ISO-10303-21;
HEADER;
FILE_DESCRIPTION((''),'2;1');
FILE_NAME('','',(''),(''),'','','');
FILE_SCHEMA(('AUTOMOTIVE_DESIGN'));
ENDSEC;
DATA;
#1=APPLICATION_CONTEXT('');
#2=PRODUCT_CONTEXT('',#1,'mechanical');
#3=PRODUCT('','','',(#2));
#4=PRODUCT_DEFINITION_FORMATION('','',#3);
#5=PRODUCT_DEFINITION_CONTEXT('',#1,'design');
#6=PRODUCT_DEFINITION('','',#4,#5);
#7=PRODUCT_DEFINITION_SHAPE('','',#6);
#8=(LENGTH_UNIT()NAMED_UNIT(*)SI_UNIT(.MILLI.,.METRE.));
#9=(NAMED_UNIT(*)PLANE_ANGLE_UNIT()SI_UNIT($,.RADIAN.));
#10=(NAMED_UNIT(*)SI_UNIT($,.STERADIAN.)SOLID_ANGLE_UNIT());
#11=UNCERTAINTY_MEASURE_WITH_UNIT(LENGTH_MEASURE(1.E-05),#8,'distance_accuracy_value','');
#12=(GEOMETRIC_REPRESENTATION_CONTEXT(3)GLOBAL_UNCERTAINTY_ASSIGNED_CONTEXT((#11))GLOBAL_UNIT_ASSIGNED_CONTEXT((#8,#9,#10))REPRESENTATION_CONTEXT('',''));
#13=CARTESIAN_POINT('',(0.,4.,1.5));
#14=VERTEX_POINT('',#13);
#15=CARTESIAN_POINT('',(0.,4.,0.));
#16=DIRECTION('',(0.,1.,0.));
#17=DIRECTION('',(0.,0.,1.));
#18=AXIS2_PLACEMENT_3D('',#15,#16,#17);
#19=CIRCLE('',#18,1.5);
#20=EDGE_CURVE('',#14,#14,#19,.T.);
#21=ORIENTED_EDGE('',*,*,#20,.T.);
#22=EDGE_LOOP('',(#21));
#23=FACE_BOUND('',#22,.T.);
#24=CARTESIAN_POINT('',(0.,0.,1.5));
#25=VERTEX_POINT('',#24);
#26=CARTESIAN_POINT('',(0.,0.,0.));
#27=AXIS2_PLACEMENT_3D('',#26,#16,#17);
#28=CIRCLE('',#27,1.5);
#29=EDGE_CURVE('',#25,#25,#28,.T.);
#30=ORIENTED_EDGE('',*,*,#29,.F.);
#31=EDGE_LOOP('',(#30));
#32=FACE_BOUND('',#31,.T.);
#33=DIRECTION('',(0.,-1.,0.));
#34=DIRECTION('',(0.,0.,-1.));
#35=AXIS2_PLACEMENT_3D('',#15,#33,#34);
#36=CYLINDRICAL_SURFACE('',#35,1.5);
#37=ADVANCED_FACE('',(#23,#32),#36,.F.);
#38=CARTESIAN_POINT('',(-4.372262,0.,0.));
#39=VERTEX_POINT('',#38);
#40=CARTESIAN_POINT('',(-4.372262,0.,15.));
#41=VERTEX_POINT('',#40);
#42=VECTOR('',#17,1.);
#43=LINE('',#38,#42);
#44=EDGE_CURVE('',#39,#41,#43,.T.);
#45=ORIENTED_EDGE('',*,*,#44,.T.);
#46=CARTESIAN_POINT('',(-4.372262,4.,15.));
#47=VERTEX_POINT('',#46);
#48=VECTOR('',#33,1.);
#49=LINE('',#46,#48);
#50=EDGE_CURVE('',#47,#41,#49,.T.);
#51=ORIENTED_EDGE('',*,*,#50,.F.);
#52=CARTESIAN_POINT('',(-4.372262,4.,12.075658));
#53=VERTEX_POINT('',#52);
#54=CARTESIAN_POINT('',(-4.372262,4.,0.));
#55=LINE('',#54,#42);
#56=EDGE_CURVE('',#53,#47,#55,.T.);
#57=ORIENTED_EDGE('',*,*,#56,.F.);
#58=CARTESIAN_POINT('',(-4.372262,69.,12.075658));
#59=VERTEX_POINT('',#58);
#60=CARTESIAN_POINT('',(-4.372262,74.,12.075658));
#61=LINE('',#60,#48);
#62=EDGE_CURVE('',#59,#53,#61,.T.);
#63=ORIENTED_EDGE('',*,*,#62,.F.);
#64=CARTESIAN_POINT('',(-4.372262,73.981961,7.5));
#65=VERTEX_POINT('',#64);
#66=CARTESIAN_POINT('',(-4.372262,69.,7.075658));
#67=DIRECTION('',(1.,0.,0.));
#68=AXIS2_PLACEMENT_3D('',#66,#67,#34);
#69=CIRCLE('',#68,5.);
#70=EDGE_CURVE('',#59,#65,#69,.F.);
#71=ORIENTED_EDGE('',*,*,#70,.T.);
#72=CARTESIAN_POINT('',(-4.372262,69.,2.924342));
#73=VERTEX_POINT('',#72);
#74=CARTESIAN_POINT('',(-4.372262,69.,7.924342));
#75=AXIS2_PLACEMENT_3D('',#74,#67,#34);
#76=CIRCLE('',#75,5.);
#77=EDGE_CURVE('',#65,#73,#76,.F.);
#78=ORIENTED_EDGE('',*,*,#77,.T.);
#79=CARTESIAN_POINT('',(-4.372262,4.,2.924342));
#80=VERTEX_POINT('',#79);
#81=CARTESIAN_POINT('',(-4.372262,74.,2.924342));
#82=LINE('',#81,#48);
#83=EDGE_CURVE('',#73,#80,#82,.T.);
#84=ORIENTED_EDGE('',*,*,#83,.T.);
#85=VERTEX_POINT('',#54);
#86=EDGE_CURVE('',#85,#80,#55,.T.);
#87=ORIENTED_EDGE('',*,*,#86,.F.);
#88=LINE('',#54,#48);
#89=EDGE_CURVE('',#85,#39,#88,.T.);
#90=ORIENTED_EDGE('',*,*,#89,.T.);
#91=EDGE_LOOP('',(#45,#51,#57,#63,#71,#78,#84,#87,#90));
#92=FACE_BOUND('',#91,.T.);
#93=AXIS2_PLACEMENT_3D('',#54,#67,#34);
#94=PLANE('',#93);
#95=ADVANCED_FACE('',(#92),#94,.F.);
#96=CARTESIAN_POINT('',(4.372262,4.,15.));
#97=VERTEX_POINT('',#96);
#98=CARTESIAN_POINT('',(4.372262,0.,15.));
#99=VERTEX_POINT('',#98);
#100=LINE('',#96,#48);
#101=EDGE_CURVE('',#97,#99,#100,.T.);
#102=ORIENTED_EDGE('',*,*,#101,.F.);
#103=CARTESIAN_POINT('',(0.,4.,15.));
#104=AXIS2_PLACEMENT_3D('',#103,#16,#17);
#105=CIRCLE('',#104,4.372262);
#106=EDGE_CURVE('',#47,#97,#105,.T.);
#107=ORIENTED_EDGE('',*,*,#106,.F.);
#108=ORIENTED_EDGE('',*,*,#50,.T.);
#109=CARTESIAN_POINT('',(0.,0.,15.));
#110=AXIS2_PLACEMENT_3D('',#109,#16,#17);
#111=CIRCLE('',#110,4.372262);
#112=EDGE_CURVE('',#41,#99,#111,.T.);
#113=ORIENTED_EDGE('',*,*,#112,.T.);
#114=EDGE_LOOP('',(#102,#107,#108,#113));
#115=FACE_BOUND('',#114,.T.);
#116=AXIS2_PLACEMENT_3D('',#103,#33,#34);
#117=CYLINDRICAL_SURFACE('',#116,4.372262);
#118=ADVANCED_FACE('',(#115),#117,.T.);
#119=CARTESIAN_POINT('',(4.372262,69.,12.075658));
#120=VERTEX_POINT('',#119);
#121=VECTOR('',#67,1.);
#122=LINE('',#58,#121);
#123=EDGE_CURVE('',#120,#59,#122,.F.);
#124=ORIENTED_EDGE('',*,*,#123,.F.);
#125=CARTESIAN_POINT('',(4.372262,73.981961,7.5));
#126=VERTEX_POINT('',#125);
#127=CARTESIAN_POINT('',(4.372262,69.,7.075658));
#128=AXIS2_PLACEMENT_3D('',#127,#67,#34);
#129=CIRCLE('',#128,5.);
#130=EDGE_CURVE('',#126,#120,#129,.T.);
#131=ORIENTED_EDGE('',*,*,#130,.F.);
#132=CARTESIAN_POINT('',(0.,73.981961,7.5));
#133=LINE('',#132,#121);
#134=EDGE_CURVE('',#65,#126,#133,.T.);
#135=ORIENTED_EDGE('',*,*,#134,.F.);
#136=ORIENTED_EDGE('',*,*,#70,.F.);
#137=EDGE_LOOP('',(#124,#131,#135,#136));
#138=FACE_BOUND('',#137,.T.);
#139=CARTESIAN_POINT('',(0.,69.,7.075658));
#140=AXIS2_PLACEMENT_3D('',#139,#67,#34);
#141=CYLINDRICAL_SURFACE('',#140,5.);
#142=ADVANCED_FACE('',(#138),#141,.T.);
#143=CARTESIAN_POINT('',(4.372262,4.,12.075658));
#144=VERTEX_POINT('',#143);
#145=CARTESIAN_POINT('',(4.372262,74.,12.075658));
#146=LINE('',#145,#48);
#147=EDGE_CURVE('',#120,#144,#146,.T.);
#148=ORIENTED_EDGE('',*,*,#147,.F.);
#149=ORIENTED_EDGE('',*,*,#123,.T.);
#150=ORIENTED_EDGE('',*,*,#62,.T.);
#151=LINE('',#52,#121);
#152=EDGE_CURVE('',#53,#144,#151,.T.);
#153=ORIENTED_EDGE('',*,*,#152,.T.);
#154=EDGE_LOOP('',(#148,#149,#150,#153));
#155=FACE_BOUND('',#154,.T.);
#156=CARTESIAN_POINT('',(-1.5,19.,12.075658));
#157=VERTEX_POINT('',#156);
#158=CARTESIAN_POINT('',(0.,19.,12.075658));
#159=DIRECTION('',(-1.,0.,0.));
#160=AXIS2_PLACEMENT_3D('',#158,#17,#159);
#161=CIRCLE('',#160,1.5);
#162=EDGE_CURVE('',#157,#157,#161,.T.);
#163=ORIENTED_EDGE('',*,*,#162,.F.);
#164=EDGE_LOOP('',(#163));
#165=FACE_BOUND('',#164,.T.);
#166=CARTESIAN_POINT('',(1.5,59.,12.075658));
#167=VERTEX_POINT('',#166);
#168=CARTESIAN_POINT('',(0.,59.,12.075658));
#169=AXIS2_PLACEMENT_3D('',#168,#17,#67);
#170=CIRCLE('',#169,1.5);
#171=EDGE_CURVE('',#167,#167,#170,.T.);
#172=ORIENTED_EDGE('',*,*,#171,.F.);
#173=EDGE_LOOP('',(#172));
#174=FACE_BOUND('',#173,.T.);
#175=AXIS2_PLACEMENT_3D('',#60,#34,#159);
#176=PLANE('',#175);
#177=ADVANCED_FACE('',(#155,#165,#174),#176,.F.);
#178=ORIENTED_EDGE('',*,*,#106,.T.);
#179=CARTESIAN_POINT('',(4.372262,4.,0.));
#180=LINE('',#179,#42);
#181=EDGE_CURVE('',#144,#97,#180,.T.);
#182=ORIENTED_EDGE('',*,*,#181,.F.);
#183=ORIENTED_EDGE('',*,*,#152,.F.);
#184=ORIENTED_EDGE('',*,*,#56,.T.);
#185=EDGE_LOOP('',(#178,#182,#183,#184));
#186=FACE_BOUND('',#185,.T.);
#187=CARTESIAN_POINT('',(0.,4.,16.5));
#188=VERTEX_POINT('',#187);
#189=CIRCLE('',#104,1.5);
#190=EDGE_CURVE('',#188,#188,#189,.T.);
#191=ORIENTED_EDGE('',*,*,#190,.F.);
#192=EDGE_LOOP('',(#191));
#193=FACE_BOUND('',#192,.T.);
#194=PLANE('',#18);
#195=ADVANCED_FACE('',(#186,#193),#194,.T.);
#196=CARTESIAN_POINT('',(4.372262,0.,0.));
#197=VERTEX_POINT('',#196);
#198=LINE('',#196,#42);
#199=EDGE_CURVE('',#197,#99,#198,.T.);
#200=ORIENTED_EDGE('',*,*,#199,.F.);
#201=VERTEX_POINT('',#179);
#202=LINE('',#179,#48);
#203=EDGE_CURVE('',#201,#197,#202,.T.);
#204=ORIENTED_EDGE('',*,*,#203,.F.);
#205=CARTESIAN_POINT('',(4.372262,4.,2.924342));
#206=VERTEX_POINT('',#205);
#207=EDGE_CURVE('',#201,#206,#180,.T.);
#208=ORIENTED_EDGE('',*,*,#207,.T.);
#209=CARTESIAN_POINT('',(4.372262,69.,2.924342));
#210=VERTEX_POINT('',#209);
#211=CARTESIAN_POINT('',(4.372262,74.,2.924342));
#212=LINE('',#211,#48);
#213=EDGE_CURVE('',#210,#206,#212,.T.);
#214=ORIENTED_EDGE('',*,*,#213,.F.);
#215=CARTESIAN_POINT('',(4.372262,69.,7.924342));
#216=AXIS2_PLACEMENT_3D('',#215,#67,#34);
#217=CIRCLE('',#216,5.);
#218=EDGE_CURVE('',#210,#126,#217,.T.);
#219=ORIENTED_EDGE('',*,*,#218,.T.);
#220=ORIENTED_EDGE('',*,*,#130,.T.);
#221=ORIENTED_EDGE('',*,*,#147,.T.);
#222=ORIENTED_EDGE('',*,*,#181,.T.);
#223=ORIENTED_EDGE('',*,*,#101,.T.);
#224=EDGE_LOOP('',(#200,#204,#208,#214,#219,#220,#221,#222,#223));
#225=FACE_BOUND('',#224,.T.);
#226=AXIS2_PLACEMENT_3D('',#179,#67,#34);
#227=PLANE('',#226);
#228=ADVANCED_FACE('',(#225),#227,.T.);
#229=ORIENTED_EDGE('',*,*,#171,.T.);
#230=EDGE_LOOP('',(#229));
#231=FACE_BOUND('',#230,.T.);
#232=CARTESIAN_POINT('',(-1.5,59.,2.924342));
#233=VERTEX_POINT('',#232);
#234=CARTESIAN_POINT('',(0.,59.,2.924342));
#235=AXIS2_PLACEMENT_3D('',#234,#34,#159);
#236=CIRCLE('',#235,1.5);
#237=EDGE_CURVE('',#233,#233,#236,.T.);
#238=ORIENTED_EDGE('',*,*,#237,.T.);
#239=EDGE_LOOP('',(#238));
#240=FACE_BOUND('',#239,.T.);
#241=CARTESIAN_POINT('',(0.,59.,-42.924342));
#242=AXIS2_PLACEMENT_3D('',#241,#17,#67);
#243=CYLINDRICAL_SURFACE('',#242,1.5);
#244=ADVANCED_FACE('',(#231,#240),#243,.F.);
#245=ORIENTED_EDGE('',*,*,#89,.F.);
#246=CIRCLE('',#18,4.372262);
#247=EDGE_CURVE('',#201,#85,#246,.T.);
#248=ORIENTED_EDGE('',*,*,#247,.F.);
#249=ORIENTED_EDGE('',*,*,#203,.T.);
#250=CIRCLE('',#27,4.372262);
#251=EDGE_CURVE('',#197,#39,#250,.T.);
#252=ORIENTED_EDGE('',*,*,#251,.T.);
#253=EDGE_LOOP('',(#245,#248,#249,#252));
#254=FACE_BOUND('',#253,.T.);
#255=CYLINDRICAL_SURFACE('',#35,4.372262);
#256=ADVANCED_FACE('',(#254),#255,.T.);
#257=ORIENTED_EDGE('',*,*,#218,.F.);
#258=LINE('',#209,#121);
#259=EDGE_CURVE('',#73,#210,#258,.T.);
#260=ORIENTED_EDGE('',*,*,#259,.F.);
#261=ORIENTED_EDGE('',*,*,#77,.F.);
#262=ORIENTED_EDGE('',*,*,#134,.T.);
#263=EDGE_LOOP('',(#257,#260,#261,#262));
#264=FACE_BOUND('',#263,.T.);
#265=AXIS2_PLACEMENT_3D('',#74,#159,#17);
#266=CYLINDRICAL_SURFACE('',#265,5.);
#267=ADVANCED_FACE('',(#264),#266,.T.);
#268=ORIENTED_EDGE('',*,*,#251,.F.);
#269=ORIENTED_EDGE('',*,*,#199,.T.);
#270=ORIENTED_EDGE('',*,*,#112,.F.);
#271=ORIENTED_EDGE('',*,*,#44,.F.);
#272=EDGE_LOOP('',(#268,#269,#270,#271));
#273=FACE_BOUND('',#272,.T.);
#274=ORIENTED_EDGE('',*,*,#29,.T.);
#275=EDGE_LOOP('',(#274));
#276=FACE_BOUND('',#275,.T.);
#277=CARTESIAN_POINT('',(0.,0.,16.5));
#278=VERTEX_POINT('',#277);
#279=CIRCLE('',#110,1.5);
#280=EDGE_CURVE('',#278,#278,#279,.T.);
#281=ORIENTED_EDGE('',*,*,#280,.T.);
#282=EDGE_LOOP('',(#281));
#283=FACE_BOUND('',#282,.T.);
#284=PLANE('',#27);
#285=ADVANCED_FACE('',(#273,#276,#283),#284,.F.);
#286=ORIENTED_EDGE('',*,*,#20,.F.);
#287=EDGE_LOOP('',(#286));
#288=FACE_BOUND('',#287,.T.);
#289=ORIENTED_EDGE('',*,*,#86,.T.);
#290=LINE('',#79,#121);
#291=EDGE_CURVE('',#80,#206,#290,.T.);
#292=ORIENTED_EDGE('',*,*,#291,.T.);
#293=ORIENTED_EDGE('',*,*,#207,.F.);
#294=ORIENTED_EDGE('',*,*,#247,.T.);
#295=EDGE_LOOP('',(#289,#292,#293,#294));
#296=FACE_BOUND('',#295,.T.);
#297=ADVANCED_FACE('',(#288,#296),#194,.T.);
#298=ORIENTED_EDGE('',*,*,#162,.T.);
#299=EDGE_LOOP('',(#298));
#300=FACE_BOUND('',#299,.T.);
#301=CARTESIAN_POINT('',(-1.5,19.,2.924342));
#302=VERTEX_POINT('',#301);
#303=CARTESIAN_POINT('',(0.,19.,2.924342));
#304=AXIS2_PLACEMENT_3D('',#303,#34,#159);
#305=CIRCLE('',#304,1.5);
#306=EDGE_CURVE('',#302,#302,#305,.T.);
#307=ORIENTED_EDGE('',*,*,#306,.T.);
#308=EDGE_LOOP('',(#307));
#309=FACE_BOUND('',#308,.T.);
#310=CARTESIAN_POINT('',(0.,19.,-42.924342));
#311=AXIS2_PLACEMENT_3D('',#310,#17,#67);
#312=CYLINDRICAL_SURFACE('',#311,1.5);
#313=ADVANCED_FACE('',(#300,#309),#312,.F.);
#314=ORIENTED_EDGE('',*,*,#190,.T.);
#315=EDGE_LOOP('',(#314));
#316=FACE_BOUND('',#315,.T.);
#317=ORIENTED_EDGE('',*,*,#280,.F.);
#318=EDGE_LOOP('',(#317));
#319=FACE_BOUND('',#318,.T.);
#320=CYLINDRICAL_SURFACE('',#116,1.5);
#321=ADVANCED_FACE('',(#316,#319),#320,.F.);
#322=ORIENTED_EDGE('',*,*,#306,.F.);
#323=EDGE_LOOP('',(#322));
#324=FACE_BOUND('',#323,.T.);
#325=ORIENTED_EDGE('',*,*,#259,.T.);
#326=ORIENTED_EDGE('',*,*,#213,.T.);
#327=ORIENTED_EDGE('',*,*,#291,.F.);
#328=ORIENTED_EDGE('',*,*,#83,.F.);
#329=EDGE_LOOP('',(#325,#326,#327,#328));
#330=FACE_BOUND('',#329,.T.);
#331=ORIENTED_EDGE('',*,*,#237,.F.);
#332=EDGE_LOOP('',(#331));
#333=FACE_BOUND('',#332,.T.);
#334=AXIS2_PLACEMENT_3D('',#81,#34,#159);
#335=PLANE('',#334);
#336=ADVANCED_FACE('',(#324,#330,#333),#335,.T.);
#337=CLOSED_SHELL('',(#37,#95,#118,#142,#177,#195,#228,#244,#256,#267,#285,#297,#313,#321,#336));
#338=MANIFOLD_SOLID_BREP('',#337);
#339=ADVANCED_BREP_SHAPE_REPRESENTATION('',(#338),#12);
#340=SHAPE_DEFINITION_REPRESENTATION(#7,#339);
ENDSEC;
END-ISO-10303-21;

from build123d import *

# Parameters (mm, degrees)
SKETCH1_R           = 1.5
BOSS_EXTRUDE1_DEPTH = 4
SKETCH2_W           = 8.74452312
SKETCH2_H           = 9.151316648
BOSS_EXTRUDE2_DEPTH = 70
FILLET3_R           = 5
SKETCH6_R           = 1.5
CUT_EXTRUDE2_DEPTH  = 55


with BuildPart() as part:
    # Sketch1 → Boss-Extrude1 (new body)
    with BuildSketch(Plane(origin=(0, 0, 0), x_dir=(1, 0, 0), z_dir=(0, 1, 0))):
        with BuildLine():
            Line((4.37226156, 0), (4.37226156, -15))
            ThreePointArc((4.37226156, -15), (0, -19.37226156), (-4.37226156, -15))
            Line((-4.37226156, -15), (-4.37226156, 0))
            ThreePointArc((-4.37226156, 0), (0, 4.37226156), (4.37226156, 0))
        make_face()
        with Locations(Location((0, 0, 0), (0, 0, 270))):
            Circle(SKETCH1_R, mode=Mode.SUBTRACT)
        with Locations(Location((0, -15, 0), (0, 0, 270))):
            Circle(SKETCH1_R, mode=Mode.SUBTRACT)
    extrude(amount=BOSS_EXTRUDE1_DEPTH)

    # Sketch2 → Boss-Extrude2 (add)
    with BuildSketch(Plane(origin=(0, 4, 0), x_dir=(1, 0, 0), z_dir=(0, 1, 0))):
        with Locations((0, -7.5)):
            Rectangle(SKETCH2_W, SKETCH2_H)
    extrude(amount=BOSS_EXTRUDE2_DEPTH)

    # Fillet3
    # the kernel refuses this fillet: 5 mm, written as the material it takes off along each edge
    with BuildSketch(Plane(origin=(-16.87226156, 74, 2.924341676), x_dir=(0, -1, 0), z_dir=(1, 0, 0)), Plane(origin=(16.87226156, 74, 12.075658324), x_dir=(0, -1, 0), z_dir=(-1, 0, 0))) as fillet3_piece_1:
        with BuildLine():
            CenterArc((FILLET3_R, -FILLET3_R), FILLET3_R, 90, 90)
            Line((0, -FILLET3_R), (0, 0))
            Line((0, 0), (FILLET3_R, 0))
        make_face()
    extrude(amount=33.74452312, mode=Mode.SUBTRACT)

    # Sketch6 → Cut-Extrude2 (cut)
    with BuildSketch(Plane.XY.offset(12.075658324)):
        with Locations((0, 59)):
            Circle(SKETCH6_R)
        with Locations(Location((0, 19, 0), (0, 0, 180))):
            Circle(SKETCH6_R)
    extrude(amount=-CUT_EXTRUDE2_DEPTH, mode=Mode.SUBTRACT)


solid = part.part
